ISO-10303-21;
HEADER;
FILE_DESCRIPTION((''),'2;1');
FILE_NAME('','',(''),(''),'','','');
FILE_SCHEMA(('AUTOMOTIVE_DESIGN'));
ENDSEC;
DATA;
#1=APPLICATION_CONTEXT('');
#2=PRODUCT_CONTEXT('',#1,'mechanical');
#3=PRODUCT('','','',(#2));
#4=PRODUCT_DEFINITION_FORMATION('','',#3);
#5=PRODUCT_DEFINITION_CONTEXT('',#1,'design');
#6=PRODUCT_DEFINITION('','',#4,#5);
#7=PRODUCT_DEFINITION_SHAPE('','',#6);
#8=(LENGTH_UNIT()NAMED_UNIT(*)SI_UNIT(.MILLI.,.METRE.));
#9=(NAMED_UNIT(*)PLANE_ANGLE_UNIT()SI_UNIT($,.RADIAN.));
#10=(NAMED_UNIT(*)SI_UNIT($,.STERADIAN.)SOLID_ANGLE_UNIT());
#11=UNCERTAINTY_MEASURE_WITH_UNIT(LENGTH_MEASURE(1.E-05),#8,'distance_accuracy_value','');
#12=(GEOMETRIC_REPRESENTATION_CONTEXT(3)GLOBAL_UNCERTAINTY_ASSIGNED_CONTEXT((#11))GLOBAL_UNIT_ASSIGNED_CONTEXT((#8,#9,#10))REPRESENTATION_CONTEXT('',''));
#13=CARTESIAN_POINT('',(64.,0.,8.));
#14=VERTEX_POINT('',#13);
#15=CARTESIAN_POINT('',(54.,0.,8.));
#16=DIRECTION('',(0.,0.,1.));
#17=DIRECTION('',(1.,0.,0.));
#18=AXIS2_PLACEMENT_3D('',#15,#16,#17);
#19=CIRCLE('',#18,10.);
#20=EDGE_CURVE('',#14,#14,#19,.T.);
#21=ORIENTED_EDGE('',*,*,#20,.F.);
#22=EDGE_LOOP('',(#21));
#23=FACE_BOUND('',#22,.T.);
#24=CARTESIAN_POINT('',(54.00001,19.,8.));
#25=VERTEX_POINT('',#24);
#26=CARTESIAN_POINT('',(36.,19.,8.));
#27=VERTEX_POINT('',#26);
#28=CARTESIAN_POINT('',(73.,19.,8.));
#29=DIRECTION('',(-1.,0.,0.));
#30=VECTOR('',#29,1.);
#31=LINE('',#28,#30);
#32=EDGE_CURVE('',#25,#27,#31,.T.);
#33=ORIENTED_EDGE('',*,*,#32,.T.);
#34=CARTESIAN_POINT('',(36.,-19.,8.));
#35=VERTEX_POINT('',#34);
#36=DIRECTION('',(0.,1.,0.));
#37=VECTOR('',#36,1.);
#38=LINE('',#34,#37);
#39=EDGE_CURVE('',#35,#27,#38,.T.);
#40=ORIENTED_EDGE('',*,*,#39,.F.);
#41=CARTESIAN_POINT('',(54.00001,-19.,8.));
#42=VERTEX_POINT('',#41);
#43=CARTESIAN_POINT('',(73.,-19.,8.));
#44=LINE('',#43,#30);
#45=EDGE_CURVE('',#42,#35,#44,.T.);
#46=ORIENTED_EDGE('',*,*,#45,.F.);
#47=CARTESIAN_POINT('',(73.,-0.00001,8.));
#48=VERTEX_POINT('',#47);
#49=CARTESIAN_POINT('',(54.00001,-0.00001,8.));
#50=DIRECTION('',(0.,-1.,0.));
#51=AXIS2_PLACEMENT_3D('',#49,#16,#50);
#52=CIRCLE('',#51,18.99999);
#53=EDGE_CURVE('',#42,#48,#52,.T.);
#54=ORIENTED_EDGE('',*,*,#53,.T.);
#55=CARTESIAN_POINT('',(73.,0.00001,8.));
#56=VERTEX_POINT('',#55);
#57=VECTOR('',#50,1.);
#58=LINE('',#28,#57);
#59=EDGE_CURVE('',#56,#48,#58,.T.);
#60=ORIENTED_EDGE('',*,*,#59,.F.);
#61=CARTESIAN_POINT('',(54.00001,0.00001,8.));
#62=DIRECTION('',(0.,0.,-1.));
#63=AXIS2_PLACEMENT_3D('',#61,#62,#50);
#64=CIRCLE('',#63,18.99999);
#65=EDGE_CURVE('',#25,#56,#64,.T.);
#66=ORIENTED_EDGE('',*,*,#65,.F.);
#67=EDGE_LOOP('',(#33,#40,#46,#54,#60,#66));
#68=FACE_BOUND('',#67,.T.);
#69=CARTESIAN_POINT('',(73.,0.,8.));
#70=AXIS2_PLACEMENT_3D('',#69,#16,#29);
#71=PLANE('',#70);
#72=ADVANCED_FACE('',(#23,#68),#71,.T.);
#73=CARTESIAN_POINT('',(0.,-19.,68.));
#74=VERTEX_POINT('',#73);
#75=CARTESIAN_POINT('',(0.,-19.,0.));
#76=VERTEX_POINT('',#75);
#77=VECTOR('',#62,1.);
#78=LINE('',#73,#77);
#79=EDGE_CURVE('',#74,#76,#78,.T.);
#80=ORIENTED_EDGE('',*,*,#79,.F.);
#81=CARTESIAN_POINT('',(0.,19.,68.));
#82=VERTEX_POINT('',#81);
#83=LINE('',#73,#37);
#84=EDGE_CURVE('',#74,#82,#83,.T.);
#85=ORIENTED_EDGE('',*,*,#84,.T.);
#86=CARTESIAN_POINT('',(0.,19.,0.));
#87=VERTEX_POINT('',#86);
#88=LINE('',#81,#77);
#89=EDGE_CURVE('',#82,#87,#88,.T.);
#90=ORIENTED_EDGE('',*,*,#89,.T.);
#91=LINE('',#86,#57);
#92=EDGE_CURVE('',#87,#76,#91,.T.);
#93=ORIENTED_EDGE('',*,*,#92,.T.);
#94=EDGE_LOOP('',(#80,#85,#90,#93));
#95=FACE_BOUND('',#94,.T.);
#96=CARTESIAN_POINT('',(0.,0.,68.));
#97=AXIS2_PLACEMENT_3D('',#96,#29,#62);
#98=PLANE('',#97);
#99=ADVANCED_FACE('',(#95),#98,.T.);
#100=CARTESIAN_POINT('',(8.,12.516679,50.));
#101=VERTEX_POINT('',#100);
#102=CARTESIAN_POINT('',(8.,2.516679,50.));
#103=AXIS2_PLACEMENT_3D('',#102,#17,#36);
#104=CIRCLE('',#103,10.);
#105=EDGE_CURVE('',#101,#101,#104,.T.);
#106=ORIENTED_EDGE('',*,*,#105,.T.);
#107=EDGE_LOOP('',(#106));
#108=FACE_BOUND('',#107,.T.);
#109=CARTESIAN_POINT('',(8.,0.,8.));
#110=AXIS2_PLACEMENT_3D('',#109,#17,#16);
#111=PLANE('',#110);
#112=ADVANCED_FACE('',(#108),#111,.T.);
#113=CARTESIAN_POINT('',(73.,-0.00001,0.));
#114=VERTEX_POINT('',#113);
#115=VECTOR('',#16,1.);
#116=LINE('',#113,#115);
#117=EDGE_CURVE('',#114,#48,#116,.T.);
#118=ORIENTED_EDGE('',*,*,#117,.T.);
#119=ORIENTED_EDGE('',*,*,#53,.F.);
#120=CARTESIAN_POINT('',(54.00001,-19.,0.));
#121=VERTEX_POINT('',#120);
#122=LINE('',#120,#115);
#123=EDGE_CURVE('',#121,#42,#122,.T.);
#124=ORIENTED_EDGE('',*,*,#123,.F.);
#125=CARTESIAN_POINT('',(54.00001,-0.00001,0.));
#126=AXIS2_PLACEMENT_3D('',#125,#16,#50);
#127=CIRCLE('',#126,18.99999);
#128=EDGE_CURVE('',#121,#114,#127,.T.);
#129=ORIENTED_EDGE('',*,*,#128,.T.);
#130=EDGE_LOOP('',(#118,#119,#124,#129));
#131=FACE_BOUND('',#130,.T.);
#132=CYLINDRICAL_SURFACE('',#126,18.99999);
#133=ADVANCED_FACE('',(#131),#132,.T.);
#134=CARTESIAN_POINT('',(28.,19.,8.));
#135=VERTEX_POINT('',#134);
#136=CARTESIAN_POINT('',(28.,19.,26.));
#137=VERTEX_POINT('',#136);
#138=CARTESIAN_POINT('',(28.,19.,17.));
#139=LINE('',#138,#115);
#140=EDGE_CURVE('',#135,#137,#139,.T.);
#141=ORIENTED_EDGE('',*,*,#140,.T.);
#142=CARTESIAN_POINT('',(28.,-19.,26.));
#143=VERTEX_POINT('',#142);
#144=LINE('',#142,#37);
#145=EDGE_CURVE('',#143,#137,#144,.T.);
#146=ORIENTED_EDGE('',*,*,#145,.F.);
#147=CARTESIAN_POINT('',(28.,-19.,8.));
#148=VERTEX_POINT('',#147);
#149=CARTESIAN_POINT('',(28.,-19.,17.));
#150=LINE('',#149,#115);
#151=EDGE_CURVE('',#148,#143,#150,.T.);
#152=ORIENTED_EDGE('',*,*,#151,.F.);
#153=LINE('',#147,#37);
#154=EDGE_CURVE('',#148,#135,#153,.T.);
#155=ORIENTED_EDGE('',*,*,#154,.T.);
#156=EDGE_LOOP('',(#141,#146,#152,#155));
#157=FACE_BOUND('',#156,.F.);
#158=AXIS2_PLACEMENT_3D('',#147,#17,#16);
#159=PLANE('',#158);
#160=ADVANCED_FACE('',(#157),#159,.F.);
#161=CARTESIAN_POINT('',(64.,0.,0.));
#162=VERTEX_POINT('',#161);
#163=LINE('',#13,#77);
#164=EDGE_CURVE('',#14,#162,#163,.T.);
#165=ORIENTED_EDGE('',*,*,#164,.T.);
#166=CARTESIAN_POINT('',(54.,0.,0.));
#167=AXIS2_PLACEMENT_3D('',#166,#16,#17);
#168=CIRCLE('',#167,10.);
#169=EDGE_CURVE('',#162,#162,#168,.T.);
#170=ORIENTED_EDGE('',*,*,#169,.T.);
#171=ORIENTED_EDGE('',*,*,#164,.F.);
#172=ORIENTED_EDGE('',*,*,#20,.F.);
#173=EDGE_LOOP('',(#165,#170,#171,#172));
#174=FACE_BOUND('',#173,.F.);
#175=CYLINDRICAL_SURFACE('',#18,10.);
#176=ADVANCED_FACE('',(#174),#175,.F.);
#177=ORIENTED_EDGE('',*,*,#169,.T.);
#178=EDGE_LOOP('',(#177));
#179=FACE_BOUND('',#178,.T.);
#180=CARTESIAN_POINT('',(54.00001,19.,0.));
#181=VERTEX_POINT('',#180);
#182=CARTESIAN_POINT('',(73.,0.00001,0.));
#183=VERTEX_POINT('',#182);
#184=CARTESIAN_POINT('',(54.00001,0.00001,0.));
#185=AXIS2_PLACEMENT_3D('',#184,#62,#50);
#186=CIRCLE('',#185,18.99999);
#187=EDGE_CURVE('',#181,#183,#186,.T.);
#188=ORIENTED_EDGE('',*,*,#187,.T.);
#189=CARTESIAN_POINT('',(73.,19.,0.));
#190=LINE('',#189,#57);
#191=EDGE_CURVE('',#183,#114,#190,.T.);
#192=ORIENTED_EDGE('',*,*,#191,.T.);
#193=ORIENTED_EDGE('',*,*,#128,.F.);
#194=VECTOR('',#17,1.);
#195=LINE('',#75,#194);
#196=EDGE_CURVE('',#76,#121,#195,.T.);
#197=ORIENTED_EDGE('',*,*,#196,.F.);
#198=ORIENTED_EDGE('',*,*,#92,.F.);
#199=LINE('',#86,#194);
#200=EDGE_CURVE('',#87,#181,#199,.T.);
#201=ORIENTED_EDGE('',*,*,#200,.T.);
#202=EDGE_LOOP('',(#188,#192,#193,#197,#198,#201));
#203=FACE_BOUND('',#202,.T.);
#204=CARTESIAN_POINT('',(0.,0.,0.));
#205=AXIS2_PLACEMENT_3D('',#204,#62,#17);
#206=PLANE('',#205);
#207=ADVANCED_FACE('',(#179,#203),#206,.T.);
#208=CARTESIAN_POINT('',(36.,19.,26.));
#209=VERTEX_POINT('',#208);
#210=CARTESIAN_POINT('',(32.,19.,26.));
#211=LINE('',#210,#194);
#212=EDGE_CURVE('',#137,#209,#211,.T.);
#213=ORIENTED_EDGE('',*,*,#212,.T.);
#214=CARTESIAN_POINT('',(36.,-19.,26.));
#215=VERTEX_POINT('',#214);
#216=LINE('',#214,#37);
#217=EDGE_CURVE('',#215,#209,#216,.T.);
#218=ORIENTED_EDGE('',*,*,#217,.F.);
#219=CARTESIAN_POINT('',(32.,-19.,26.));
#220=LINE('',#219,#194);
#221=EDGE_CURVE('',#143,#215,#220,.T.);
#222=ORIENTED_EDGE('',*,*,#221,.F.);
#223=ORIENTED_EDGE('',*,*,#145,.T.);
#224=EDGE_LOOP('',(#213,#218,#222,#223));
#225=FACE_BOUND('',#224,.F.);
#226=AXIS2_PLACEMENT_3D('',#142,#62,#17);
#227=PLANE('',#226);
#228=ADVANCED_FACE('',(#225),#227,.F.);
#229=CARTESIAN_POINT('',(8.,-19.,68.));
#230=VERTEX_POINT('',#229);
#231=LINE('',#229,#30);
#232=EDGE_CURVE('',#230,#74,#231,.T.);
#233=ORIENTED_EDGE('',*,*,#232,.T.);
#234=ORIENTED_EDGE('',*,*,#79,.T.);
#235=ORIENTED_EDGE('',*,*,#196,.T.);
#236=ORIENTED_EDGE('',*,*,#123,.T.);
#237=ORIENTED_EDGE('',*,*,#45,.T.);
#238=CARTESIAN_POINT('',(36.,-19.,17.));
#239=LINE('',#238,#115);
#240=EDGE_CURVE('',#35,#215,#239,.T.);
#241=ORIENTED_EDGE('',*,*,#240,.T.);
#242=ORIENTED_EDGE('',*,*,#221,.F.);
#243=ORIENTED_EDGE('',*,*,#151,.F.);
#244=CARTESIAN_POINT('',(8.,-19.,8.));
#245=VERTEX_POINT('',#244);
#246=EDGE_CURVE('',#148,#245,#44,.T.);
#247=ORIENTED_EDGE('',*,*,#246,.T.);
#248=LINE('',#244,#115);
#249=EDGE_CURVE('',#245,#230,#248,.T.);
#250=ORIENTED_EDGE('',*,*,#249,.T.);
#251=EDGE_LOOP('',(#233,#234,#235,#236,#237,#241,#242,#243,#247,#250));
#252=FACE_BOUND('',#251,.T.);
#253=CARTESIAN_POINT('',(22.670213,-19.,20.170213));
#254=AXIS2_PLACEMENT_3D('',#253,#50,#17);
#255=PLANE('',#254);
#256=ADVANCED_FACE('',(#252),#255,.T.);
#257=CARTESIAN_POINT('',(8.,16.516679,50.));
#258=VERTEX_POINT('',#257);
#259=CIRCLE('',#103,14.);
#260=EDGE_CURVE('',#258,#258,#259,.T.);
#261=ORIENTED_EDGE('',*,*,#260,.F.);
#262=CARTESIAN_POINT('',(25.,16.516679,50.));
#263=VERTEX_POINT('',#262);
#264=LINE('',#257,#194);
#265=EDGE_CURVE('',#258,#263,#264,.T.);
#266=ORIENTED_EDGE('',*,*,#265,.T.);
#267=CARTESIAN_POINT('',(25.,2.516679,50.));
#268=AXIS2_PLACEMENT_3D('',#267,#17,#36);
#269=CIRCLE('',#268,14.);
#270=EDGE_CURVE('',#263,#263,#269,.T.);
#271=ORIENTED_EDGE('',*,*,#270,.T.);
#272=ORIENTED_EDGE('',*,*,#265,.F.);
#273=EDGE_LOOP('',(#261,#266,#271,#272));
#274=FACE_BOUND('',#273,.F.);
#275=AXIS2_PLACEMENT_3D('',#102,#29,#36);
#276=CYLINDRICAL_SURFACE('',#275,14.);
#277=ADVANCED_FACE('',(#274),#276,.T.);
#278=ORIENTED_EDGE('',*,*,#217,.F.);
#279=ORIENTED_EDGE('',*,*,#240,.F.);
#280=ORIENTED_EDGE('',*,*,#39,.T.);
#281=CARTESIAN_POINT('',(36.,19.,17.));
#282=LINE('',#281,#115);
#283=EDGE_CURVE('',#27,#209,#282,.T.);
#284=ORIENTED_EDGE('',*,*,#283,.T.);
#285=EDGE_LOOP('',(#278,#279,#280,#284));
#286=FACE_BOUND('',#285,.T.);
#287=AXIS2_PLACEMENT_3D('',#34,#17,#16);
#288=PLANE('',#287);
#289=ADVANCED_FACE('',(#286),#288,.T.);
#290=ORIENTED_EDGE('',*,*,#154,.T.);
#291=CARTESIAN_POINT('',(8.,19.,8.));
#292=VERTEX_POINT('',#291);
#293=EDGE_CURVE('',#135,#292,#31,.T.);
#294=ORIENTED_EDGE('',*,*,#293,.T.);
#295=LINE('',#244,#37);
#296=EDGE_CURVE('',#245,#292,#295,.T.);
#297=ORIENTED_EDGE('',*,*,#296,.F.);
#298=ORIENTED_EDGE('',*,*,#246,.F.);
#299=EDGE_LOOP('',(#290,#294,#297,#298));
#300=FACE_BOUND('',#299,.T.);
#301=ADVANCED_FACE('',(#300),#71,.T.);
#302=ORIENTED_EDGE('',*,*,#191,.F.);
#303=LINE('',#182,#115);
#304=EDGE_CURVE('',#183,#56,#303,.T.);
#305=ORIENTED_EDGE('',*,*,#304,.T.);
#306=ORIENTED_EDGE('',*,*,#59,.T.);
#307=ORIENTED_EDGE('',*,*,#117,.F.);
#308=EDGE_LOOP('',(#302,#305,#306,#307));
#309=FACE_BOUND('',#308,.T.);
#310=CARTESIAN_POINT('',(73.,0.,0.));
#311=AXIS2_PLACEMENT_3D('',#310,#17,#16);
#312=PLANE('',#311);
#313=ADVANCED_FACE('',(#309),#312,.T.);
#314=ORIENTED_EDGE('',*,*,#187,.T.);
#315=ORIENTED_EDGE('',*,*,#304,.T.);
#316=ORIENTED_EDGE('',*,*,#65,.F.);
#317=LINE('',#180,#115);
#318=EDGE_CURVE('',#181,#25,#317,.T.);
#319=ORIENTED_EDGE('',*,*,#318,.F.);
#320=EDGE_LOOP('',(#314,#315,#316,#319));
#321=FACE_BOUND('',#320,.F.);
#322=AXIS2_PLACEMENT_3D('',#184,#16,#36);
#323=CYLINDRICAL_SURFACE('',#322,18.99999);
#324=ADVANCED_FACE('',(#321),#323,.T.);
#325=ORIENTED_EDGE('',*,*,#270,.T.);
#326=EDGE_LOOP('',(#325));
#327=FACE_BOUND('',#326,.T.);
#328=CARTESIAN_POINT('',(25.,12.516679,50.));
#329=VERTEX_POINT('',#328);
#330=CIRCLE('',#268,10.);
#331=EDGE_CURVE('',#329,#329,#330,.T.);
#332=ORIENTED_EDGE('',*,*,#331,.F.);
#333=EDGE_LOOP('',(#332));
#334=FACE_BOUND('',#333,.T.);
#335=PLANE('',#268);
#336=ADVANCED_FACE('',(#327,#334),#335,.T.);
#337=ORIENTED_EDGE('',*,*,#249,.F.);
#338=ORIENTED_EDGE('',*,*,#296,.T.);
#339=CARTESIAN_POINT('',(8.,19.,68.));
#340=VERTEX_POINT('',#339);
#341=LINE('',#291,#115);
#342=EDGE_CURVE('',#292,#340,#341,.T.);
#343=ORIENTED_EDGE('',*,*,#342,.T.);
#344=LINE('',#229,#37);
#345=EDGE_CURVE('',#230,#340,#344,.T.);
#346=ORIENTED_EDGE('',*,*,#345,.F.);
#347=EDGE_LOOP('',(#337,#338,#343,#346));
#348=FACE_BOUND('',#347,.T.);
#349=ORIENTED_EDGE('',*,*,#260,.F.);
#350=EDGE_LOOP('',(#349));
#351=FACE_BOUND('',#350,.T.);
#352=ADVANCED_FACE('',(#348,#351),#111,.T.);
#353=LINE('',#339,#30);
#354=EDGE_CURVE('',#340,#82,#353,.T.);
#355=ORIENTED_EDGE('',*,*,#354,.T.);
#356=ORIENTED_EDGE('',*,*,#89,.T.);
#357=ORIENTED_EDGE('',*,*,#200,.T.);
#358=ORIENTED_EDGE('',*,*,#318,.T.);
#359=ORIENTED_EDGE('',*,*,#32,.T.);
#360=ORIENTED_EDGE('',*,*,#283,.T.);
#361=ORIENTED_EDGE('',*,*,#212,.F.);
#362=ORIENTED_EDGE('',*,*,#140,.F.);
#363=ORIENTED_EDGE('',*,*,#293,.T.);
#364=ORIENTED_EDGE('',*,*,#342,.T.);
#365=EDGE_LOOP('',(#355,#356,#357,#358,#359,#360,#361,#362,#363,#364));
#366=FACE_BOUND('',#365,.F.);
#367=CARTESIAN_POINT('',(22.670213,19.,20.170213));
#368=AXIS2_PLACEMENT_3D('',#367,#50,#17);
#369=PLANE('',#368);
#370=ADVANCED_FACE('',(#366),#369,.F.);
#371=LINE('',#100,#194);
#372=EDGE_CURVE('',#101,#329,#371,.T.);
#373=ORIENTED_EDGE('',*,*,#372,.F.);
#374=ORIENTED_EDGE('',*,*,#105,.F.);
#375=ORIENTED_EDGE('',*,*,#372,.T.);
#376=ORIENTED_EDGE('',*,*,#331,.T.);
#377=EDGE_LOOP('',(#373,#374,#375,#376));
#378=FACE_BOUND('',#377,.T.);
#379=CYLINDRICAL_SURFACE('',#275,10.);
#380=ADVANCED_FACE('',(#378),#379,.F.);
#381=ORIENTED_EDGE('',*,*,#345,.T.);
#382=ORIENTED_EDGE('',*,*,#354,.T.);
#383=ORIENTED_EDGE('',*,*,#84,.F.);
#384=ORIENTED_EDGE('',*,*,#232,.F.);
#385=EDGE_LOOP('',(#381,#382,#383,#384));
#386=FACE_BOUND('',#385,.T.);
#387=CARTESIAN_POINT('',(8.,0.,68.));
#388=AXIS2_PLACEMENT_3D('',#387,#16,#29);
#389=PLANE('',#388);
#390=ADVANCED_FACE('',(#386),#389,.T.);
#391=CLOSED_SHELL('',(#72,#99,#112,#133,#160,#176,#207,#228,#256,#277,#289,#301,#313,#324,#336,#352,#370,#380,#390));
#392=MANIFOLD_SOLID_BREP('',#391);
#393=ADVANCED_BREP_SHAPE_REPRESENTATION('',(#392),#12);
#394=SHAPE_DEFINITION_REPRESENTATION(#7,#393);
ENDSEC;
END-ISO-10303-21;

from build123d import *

# Parameters (mm, degrees)
F1_DEPTH = 19
F2_R     = 14
F2_R_2   = 10
F3_DEPTH = 17
F4_R     = 18.99999
F5_R     = 10
F6_DEPTH = 8.001
F7_W     = 8
F7_H     = 18
F8_DEPTH = 38


# Not quite as in the source:
# - a fillet or chamfer is up to 0.001 mm smaller than in the source, because OpenCascade refuses the exact size


with BuildPart() as f1:
    # F0 (on Front) → F1 (new body, symmetric)
    with BuildSketch(Plane.XZ):
        Polygon((0, 68), (0, 0), (73, 0), (73, 8), (8, 8), (8, 68), align=None)
    extrude(amount=F1_DEPTH, both=True)

    # F2 (on face) → F3 (join)
    with BuildSketch(Plane.YZ.offset(8)):
        with Locations((2.5166787673, 50)):
            Circle(F2_R)
        with Locations((2.5166787673, 50)):
            Circle(F2_R_2, mode=Mode.SUBTRACT)
    extrude(amount=F3_DEPTH)

    # F4 (radius 19 in the source; OpenCascade refuses exactly that, so slightly less here)
    f4_edges = [f1.edges().sort_by_distance(p)[0] for p in [
        (73, -19, 4),
        (73, 19, 4),
    ]]
    fillet(f4_edges, radius=F4_R)

    # F5 (on face) → F6 (cut, through all)
    with BuildSketch(Plane.XY.offset(8)):
        with Locations((54, 0)):
            Circle(F5_R)
    extrude(amount=-F6_DEPTH, mode=Mode.SUBTRACT)

    # F7 (on face) → F8 (join, through all)
    with BuildSketch(Plane.XZ.offset(19)):
        with Locations((32, 17)):
            Rectangle(F7_W, F7_H)
    extrude(amount=-F8_DEPTH)


solid = f1.part
